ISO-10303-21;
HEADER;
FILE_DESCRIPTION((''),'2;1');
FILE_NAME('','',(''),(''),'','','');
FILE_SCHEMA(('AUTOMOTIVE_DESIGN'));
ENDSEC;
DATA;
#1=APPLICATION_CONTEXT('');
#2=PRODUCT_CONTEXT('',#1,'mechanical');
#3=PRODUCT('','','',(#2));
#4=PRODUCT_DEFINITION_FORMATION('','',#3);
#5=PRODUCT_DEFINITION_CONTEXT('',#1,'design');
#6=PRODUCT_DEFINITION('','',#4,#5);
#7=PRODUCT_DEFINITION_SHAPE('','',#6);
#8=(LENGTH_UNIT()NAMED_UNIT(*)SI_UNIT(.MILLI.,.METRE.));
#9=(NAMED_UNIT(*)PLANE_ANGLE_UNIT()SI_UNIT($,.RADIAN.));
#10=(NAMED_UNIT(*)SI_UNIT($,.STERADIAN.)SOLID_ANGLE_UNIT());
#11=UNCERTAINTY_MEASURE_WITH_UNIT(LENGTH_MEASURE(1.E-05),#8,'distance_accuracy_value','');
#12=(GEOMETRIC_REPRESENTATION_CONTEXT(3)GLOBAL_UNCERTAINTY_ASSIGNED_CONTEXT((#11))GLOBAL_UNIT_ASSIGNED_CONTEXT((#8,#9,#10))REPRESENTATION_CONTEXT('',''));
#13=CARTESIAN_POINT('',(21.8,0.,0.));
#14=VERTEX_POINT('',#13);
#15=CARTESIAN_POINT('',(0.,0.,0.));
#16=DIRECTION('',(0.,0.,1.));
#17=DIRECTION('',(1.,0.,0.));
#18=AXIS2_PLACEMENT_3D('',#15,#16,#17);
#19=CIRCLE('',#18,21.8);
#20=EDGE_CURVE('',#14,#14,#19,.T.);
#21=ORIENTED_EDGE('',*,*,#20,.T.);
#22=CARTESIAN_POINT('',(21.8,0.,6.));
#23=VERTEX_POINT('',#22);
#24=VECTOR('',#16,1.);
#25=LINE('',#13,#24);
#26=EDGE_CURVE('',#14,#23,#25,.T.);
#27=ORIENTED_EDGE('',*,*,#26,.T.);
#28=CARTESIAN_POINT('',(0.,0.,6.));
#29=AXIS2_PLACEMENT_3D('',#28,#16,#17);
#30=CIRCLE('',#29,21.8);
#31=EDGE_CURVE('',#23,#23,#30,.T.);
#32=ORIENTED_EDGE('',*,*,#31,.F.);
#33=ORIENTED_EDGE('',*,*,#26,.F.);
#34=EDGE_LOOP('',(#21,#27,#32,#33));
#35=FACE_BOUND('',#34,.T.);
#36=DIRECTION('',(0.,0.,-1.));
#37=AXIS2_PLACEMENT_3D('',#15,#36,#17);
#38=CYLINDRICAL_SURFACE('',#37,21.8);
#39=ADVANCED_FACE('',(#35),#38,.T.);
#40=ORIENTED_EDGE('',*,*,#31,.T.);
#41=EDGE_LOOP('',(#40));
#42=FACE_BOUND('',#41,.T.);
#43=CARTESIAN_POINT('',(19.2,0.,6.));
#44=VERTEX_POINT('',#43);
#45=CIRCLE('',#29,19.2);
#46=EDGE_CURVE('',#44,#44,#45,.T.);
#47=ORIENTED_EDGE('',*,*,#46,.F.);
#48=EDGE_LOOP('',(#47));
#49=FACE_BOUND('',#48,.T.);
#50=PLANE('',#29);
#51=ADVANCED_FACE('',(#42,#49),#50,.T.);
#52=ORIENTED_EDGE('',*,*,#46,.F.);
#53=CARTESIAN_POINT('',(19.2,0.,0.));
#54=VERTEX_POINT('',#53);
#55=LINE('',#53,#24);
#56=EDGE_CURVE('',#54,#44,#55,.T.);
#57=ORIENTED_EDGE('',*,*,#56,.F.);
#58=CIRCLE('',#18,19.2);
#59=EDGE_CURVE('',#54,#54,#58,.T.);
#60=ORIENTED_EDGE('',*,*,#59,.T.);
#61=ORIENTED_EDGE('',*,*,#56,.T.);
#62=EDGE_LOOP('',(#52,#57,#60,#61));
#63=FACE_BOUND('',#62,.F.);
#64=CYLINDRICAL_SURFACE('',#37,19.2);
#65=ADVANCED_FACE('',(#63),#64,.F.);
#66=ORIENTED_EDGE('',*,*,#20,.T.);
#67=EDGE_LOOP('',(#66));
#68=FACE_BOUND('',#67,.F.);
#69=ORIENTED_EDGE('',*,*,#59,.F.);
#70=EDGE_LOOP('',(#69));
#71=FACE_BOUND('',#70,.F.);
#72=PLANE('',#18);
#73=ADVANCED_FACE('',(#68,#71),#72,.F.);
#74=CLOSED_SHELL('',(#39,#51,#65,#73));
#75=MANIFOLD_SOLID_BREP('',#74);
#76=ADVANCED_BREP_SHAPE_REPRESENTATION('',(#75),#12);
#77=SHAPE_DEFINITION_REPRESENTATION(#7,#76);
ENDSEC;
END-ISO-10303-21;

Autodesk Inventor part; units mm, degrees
ref_plane "YZ Plane" through (0, 0, 0) normal (1, 0, 0) x (0, 1, 0)
ref_plane "XZ Plane" through (0, 0, 0) normal (0, 1, 0) x (-1, 0, 0)
ref_plane "XY Plane" through (0, 0, 0) normal (0, 0, 1) x (1, 0, 0)
ref_plane "Work Plane1" through (0, 0, 0) normal (0, 0, 1) x (1, 0, 0)
sketch "Sketch1" plane through (0, 0, 0) normal (0, 0, 1) x (1, 0, 0)
  circle A0 centre (0, 0) radius 19
  arc A1 (20.75769, 7.28823) -> (-20.75769, 7.28823) centre (0, 0) ccw
  circle A2 centre (0, 0) radius 15
  circle A3 centre (0, 0) radius 22
  circle A4 centre (0, 0) radius 21.8
  circle A5 centre (0, 0) radius 19.2
  point P0 (0, 0)
  dimension "d0" = 0.2
  dimension "d1" = 0.2
sketch "Sketch1 outline for Extrusion1" plane through (0, 0, 0) normal (0, 0, 1) x (1, 0, 0)
  circle A0 centre (0, 0) radius 21.8
  circle A1 centre (0, 0) radius 19.2
extrude "Extrusion1" add sketch "Sketch1 outline for Extrusion1" along normal blind 6
properties part number "bearing-spacer-top_3DPrint"
